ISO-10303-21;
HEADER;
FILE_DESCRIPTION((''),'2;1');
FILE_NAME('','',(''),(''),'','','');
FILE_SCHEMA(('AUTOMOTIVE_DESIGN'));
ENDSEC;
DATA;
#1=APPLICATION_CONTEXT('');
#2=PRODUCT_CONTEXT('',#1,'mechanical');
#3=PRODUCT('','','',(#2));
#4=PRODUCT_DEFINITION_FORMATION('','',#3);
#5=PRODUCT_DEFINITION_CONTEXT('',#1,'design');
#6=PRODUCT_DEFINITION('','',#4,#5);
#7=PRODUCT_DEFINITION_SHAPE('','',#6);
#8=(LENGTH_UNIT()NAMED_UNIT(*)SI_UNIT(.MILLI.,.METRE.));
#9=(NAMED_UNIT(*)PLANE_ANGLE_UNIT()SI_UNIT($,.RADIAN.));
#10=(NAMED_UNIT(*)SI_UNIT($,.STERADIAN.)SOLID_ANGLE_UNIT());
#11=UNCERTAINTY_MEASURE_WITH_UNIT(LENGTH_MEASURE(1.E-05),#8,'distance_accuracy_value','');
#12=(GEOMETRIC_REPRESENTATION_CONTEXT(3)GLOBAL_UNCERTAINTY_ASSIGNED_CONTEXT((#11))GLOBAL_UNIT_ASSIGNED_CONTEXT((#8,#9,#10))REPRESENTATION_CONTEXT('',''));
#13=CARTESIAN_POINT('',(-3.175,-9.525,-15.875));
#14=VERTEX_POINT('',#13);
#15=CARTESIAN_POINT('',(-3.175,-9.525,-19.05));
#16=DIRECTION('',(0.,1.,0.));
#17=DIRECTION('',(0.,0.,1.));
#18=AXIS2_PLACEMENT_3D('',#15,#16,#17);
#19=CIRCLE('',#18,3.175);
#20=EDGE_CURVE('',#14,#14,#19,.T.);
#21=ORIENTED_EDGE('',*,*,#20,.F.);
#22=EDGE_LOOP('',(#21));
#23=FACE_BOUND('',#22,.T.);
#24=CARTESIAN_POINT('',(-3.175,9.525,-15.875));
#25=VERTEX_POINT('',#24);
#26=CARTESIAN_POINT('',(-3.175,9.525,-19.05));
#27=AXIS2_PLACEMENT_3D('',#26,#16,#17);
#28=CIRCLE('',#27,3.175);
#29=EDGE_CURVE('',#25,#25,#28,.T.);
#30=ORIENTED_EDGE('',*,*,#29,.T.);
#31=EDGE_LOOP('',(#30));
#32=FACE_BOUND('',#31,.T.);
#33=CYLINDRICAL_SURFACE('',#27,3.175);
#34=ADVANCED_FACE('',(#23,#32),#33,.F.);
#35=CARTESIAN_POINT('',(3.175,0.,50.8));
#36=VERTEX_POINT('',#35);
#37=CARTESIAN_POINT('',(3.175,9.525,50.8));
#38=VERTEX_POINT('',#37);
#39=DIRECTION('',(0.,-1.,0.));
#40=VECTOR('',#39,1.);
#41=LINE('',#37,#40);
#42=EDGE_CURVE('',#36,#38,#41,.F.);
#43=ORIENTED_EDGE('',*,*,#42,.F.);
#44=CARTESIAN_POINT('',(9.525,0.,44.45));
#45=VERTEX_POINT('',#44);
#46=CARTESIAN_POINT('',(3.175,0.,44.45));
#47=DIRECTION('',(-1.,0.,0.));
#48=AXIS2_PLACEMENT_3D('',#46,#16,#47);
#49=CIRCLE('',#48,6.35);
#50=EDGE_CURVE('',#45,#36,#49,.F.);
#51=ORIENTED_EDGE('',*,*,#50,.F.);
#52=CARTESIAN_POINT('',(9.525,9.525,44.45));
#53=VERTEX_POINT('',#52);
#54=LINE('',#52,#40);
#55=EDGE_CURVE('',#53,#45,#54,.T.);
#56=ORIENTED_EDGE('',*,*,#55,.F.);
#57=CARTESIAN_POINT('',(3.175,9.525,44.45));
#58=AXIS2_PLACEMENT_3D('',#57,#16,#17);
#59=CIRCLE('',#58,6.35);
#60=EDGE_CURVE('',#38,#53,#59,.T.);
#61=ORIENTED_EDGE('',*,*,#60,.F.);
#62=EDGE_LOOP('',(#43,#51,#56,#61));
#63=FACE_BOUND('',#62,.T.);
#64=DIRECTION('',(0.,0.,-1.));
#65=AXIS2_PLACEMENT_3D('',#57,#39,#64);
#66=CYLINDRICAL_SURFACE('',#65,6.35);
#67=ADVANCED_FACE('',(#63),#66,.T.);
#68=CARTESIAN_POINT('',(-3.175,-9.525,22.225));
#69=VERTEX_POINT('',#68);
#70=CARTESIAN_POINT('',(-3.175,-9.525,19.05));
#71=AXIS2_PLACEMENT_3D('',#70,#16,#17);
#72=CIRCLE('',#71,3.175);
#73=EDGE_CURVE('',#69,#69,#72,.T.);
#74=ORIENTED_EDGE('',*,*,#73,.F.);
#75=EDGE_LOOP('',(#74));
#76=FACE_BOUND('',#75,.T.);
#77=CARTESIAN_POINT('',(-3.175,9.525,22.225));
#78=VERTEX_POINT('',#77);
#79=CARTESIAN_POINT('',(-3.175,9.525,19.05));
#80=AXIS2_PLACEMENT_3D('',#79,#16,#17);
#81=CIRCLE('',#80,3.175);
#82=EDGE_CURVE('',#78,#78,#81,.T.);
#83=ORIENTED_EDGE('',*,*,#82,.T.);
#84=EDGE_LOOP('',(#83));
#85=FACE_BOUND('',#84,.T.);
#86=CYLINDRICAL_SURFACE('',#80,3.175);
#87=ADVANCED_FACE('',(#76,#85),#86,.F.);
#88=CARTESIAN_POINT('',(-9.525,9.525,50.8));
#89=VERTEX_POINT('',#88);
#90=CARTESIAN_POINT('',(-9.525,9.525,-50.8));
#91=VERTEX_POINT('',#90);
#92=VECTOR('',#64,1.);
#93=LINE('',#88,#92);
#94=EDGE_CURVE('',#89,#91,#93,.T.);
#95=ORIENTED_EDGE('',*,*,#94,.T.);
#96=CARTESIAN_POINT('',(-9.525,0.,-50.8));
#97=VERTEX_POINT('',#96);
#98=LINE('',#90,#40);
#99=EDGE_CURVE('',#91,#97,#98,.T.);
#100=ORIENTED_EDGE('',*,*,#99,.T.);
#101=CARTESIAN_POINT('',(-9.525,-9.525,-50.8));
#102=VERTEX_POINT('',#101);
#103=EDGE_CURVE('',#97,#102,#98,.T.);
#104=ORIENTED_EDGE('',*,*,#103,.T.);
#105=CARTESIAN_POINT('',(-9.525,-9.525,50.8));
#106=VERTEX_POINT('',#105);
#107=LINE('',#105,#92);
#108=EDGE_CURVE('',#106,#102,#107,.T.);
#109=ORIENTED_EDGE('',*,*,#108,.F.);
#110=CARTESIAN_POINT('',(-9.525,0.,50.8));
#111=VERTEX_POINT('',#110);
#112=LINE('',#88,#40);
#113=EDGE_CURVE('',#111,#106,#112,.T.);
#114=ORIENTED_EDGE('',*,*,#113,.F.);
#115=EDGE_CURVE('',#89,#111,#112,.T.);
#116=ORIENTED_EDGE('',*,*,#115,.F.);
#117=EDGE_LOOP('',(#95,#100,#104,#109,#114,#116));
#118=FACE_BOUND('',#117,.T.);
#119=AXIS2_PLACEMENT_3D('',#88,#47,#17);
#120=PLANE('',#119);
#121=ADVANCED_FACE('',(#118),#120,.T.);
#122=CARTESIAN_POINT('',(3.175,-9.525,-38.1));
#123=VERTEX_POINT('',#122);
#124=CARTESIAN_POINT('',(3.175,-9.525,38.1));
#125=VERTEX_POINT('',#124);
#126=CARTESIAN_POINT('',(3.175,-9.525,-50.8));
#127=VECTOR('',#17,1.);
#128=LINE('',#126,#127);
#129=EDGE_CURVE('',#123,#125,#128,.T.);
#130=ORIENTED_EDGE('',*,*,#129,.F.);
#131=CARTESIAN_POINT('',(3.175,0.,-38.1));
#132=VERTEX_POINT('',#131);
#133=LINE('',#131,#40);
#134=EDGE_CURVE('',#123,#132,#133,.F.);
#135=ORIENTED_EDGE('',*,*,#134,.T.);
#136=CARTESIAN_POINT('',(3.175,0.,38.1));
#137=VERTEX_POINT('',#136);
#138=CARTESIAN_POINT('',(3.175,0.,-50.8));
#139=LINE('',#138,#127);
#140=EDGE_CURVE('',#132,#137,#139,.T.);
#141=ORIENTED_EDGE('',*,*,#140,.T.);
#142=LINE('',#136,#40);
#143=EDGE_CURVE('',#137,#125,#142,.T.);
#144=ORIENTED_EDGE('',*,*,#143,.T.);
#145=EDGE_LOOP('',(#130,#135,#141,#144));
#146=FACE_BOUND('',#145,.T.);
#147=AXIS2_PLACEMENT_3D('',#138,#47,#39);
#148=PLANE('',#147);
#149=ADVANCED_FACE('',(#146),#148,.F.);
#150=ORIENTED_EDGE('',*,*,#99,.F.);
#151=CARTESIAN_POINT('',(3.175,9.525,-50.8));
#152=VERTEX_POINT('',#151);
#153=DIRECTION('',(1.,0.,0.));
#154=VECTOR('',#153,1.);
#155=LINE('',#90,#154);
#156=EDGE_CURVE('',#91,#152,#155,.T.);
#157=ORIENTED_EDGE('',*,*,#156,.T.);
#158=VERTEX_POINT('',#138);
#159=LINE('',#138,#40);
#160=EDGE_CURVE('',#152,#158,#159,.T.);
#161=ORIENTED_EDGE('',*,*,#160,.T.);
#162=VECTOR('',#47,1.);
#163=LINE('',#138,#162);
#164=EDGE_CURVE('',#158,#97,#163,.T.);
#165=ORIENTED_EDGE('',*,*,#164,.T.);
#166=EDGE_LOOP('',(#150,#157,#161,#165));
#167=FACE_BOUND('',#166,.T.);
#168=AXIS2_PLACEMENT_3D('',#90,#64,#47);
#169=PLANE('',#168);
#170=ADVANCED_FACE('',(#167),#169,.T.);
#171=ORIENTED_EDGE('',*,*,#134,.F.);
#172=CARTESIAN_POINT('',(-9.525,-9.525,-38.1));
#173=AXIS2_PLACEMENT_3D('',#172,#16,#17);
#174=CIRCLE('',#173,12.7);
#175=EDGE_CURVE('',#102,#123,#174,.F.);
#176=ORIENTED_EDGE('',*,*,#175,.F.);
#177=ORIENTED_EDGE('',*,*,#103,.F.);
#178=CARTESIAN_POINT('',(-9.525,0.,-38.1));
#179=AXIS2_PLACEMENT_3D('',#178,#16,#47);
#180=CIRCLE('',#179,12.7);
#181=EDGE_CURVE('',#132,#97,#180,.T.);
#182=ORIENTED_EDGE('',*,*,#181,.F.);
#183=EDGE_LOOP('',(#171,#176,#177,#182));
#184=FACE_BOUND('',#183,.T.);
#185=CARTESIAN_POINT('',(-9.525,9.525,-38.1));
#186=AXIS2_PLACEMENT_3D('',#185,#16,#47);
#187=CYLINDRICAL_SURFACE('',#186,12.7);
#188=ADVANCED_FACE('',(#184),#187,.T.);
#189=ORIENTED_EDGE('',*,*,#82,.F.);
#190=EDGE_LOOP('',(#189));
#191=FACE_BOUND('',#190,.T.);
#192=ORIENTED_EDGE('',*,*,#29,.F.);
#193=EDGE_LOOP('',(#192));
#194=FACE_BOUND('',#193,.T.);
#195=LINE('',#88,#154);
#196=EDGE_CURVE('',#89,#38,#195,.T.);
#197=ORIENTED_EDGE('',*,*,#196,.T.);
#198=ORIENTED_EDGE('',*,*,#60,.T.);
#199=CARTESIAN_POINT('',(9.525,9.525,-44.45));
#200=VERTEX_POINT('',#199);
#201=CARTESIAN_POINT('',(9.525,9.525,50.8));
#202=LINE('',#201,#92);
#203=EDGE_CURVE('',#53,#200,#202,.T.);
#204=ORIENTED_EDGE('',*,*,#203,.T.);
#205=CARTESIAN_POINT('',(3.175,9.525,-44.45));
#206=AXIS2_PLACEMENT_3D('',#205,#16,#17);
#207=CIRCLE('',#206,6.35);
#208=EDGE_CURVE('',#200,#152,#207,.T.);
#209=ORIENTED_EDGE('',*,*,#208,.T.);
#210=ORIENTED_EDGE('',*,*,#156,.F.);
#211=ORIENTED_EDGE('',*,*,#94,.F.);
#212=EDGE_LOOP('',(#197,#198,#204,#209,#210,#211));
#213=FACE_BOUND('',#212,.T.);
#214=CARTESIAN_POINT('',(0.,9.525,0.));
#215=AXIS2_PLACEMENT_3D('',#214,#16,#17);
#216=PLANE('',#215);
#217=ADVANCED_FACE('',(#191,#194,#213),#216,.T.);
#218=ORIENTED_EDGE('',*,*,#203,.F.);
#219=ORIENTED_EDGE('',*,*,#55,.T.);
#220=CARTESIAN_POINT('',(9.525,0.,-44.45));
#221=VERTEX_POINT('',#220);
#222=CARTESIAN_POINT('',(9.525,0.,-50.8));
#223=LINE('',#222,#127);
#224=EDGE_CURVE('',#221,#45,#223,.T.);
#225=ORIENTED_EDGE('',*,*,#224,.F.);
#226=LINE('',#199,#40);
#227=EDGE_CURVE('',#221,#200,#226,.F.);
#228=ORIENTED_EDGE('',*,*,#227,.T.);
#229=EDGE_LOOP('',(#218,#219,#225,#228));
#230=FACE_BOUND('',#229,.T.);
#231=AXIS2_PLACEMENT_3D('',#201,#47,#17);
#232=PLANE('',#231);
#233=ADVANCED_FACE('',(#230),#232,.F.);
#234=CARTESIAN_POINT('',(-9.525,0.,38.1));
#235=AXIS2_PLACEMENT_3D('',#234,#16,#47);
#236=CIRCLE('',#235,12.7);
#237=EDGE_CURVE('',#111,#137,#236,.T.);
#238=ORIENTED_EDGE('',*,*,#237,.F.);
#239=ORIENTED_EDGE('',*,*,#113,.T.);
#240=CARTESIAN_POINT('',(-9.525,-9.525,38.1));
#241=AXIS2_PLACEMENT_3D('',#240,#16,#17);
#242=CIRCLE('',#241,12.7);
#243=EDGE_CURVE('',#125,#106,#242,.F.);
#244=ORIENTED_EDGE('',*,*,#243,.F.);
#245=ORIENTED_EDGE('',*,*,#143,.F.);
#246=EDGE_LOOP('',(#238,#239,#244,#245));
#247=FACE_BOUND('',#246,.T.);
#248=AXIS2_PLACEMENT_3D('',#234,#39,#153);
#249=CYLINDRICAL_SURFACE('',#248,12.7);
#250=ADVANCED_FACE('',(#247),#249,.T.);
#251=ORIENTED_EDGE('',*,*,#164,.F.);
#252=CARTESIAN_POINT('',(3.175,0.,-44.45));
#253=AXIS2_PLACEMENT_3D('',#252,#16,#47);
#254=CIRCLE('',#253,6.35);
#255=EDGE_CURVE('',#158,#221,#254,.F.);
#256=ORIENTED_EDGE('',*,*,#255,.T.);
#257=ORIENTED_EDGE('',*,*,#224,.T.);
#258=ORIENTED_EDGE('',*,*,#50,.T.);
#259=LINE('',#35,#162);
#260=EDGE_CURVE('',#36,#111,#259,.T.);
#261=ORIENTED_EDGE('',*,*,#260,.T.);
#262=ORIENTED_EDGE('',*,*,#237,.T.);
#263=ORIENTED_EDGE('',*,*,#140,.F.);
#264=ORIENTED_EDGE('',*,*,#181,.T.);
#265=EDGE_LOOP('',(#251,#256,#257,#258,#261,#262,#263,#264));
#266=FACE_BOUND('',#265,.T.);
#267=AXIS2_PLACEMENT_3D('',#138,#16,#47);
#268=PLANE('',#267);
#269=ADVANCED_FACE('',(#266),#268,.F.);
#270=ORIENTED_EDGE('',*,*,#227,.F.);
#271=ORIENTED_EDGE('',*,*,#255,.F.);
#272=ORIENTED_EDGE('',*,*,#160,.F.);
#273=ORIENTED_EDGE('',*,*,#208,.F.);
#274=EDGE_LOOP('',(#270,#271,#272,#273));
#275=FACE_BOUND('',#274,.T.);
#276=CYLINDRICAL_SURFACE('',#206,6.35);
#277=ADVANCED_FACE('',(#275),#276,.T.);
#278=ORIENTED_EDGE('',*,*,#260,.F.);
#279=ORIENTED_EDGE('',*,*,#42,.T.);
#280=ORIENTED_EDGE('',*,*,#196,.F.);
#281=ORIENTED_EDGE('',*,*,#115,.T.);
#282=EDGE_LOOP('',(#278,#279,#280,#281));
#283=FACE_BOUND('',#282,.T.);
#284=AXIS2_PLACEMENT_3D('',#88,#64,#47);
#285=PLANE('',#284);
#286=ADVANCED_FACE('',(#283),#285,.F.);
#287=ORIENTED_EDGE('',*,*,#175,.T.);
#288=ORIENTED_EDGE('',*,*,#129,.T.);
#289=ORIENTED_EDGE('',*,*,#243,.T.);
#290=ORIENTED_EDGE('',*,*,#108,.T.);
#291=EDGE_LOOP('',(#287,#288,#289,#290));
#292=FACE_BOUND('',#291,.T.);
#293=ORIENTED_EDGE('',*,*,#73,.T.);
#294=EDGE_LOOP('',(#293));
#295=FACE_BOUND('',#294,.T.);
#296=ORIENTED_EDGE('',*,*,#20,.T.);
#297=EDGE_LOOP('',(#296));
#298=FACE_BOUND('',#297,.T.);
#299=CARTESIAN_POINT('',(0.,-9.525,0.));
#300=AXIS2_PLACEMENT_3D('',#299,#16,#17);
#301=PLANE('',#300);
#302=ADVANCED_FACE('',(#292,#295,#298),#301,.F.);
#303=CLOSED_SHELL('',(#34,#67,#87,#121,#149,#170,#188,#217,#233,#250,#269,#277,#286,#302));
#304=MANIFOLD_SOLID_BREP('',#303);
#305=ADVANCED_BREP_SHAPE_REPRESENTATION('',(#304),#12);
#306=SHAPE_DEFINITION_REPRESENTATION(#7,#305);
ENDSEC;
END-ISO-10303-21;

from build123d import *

# Parameters (mm, degrees)
SKETCH1_W                       = 19.05
SKETCH1_H                       = 101.6
BOSS_EXTRUDE1_DEPTH             = 9.525
SKETCH2_W                       = 6.35
SKETCH2_H                       = 9.525
CUT_EXTRUDE1_DEPTH              = 103.489078686
F_1_4_0_25_DIAMETER_HOLE1_D     = 6.35
F_1_4_0_25_DIAMETER_HOLE1_DEPTH = 25.4
F_1_4_0_25_DIAMETER_HOLE1_TIP   = 1.907732465
FILLET1_R                       = 12.7
FILLET2_R                       = 6.35


with BuildPart() as part:
    # Sketch1 → Boss-Extrude1 (new, symmetric)
    with BuildSketch(Plane(origin=(0, 0, 0), x_dir=(1, 0, 0), z_dir=(0, 1, 0))):
        Rectangle(SKETCH1_W, SKETCH1_H)
    extrude(amount=BOSS_EXTRUDE1_DEPTH, both=True)

    # Sketch2 → Cut-Extrude1 (cut, through all)
    with BuildSketch(Plane.XY.offset(50.8)):
        with Locations((6.35, -4.7625)):
            Rectangle(SKETCH2_W, SKETCH2_H)
    extrude(amount=-CUT_EXTRUDE1_DEPTH, mode=Mode.SUBTRACT)

    # 1/4 (0.25) Diameter Hole1
    with Locations(Plane(origin=(0, 9.525, 0), x_dir=(1, 0, 0), z_dir=(0, 1, 0))):
        with Locations((-3.175, 19.05), (-3.175, -19.05)):
            Hole(F_1_4_0_25_DIAMETER_HOLE1_D / 2, depth=F_1_4_0_25_DIAMETER_HOLE1_DEPTH)
            with Locations((0, 0, -(F_1_4_0_25_DIAMETER_HOLE1_DEPTH + F_1_4_0_25_DIAMETER_HOLE1_TIP / 2))):  # 118° drill point
                Cone(0, F_1_4_0_25_DIAMETER_HOLE1_D / 2, F_1_4_0_25_DIAMETER_HOLE1_TIP, mode=Mode.SUBTRACT)

    # Fillet1
    fillet1_edges = [part.edges().sort_by_distance(p)[0] for p in [
        (3.175, -4.7625, -50.8),
        (3.175, -4.7625, 50.8),
    ]]
    fillet(fillet1_edges, radius=FILLET1_R - 0.0001)  # a hair under: the kernel refuses the full size

    # Fillet2
    fillet2_edges = [part.edges().sort_by_distance(p)[0] for p in [
        (9.525, 4.7625, -50.8),
        (9.525, 4.7625, 50.8),
    ]]
    fillet(fillet2_edges, radius=FILLET2_R)


solid = part.part
